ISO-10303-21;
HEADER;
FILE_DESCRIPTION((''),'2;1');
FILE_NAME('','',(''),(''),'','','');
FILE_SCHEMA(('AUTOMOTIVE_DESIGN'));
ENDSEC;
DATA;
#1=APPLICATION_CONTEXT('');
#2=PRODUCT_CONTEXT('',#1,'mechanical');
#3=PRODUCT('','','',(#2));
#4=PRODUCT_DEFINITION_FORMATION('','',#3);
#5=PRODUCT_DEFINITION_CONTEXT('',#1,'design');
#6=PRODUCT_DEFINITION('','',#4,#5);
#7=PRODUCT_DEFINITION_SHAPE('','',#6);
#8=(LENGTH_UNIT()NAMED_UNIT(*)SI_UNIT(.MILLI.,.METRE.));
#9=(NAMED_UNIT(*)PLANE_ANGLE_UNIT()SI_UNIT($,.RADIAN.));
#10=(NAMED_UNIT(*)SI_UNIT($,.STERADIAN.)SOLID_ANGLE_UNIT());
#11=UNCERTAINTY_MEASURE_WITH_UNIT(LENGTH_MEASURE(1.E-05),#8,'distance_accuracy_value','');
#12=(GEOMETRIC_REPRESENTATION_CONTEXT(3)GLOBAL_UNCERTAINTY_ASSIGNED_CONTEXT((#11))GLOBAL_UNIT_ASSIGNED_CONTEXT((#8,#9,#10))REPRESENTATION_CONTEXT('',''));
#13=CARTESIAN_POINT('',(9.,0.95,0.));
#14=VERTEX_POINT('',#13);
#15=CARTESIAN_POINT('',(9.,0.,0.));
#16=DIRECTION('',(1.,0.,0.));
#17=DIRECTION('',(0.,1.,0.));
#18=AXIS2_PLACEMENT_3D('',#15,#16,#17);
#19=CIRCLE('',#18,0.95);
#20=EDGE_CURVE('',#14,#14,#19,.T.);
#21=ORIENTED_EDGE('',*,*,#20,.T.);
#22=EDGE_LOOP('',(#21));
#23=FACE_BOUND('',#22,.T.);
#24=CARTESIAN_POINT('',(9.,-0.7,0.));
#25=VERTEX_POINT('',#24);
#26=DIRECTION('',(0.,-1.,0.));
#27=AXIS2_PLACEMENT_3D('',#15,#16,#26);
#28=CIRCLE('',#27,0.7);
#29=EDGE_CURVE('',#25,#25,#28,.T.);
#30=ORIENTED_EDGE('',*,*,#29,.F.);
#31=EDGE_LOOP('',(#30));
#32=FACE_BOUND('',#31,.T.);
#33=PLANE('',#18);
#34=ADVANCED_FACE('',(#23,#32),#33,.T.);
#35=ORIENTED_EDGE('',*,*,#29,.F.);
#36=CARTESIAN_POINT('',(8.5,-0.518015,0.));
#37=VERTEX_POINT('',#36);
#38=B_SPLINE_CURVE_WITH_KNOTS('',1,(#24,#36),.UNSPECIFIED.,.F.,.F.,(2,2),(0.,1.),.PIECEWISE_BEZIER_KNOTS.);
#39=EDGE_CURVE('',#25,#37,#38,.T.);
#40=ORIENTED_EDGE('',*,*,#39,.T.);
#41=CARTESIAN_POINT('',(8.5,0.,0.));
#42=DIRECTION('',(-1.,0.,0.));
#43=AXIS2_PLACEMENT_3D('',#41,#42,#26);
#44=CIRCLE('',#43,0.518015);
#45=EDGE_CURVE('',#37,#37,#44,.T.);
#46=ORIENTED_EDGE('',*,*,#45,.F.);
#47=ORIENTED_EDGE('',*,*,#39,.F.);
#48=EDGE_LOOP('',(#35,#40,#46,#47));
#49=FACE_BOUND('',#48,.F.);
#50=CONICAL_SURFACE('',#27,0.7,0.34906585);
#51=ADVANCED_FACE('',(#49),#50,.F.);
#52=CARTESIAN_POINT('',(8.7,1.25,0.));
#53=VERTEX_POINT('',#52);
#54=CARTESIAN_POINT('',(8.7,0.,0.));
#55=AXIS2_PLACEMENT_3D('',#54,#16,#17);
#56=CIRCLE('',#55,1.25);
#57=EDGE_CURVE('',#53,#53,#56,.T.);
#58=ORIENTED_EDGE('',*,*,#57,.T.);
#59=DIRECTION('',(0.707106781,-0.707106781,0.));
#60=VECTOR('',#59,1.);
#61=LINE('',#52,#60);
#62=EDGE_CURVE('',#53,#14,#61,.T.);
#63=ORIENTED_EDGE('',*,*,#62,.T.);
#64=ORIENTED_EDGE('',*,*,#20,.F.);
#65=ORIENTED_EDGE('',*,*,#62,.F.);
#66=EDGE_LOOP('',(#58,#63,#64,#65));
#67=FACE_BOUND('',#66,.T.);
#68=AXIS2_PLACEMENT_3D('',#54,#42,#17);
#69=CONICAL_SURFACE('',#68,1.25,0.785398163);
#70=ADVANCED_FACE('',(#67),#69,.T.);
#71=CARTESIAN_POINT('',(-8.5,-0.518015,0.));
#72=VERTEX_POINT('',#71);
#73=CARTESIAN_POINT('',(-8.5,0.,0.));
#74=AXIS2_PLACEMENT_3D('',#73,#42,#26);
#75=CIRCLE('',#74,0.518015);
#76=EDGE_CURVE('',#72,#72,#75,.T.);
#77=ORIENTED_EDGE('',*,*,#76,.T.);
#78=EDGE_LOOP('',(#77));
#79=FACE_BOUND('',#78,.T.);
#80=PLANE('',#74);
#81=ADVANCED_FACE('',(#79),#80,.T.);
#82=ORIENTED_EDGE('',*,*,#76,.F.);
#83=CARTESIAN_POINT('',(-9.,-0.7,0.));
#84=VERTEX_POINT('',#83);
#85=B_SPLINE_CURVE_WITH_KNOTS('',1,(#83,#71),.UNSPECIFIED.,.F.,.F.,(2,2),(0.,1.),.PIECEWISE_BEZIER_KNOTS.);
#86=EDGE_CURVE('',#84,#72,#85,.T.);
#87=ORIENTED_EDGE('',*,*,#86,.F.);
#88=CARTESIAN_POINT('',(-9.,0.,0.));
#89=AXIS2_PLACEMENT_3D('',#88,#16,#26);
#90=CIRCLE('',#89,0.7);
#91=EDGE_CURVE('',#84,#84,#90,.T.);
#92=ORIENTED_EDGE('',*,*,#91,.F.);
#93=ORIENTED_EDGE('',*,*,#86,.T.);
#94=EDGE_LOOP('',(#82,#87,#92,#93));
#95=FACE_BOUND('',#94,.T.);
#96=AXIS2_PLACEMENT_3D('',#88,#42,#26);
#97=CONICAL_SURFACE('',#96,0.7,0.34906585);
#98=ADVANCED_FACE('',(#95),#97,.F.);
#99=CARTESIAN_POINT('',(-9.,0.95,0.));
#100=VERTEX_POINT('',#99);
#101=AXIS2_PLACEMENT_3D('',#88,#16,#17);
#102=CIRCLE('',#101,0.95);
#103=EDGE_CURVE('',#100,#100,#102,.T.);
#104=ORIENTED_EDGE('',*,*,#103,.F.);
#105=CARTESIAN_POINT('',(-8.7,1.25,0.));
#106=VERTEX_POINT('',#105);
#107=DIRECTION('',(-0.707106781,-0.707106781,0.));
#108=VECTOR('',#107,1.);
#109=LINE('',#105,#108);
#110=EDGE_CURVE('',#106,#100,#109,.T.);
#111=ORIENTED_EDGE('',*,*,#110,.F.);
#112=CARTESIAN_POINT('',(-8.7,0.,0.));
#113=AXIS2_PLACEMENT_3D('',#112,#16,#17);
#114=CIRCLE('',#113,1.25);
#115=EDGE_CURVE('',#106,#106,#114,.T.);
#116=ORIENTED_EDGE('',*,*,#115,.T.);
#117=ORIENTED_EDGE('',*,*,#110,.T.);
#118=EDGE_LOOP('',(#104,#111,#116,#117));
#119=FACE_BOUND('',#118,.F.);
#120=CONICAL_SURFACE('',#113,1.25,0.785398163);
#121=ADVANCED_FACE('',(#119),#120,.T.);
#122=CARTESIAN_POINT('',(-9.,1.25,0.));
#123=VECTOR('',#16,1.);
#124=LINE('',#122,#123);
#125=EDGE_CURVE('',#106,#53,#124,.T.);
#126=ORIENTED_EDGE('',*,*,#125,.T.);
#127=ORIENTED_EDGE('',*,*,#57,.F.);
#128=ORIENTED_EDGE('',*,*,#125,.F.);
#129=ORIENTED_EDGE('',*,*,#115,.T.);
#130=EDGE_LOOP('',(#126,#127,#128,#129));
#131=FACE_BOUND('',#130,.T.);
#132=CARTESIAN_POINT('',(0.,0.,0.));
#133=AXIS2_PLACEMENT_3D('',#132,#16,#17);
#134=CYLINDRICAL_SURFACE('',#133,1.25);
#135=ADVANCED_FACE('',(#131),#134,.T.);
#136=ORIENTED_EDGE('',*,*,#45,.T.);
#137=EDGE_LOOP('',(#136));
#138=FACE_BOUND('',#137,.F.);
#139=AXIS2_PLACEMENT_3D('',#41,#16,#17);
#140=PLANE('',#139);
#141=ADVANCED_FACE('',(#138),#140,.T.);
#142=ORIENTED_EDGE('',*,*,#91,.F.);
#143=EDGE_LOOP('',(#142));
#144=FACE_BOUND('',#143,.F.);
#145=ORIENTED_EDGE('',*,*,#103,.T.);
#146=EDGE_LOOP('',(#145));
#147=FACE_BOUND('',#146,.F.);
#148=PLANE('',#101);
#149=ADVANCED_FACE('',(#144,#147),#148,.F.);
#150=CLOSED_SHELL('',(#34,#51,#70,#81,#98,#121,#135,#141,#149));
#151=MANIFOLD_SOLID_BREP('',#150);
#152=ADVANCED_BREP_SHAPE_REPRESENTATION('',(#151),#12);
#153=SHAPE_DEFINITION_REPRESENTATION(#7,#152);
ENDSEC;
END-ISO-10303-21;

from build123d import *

# Parameters (mm, degrees)
F0_R     = 1.25
F1_DEPTH = 9
F2_SIZE  = 0.3
F3_R     = 0.7
F4_DEPTH = 0.5
F4_TAPER = 20


# Not quite as in the source:
# - a pattern or mirror of a feature is missing from the dataset's text; its kind, count and spacing are read off the source's solid


with BuildPart() as f1:
    # F0 (on Right) → F1 (new body, symmetric)
    with BuildSketch(Plane.YZ):
        Circle(F0_R)
    extrude(amount=F1_DEPTH, both=True)

    # F2
    f2_edges = [f1.edges().sort_by_distance(p)[0] for p in [
        (-9, -1.25, 0),
        (9, -1.25, 0),
    ]]
    chamfer(f2_edges, length=F2_SIZE)

    # F3 (on face) → F4 (cut)
    with BuildSketch(Plane(origin=(-9, 0, 0), x_dir=(0, -1, 0), z_dir=(-1, 0, 0))):
        Circle(F3_R)
    f4 = extrude(amount=-F4_DEPTH, taper=F4_TAPER, mode=Mode.SUBTRACT)

    # F4_copies: F4 across plane
    add(f4.mirror(Plane(origin=(0, 0, 0), x_dir=(0, 0, 1), z_dir=(1, 0, 0))), mode=Mode.SUBTRACT)


solid = f1.part
